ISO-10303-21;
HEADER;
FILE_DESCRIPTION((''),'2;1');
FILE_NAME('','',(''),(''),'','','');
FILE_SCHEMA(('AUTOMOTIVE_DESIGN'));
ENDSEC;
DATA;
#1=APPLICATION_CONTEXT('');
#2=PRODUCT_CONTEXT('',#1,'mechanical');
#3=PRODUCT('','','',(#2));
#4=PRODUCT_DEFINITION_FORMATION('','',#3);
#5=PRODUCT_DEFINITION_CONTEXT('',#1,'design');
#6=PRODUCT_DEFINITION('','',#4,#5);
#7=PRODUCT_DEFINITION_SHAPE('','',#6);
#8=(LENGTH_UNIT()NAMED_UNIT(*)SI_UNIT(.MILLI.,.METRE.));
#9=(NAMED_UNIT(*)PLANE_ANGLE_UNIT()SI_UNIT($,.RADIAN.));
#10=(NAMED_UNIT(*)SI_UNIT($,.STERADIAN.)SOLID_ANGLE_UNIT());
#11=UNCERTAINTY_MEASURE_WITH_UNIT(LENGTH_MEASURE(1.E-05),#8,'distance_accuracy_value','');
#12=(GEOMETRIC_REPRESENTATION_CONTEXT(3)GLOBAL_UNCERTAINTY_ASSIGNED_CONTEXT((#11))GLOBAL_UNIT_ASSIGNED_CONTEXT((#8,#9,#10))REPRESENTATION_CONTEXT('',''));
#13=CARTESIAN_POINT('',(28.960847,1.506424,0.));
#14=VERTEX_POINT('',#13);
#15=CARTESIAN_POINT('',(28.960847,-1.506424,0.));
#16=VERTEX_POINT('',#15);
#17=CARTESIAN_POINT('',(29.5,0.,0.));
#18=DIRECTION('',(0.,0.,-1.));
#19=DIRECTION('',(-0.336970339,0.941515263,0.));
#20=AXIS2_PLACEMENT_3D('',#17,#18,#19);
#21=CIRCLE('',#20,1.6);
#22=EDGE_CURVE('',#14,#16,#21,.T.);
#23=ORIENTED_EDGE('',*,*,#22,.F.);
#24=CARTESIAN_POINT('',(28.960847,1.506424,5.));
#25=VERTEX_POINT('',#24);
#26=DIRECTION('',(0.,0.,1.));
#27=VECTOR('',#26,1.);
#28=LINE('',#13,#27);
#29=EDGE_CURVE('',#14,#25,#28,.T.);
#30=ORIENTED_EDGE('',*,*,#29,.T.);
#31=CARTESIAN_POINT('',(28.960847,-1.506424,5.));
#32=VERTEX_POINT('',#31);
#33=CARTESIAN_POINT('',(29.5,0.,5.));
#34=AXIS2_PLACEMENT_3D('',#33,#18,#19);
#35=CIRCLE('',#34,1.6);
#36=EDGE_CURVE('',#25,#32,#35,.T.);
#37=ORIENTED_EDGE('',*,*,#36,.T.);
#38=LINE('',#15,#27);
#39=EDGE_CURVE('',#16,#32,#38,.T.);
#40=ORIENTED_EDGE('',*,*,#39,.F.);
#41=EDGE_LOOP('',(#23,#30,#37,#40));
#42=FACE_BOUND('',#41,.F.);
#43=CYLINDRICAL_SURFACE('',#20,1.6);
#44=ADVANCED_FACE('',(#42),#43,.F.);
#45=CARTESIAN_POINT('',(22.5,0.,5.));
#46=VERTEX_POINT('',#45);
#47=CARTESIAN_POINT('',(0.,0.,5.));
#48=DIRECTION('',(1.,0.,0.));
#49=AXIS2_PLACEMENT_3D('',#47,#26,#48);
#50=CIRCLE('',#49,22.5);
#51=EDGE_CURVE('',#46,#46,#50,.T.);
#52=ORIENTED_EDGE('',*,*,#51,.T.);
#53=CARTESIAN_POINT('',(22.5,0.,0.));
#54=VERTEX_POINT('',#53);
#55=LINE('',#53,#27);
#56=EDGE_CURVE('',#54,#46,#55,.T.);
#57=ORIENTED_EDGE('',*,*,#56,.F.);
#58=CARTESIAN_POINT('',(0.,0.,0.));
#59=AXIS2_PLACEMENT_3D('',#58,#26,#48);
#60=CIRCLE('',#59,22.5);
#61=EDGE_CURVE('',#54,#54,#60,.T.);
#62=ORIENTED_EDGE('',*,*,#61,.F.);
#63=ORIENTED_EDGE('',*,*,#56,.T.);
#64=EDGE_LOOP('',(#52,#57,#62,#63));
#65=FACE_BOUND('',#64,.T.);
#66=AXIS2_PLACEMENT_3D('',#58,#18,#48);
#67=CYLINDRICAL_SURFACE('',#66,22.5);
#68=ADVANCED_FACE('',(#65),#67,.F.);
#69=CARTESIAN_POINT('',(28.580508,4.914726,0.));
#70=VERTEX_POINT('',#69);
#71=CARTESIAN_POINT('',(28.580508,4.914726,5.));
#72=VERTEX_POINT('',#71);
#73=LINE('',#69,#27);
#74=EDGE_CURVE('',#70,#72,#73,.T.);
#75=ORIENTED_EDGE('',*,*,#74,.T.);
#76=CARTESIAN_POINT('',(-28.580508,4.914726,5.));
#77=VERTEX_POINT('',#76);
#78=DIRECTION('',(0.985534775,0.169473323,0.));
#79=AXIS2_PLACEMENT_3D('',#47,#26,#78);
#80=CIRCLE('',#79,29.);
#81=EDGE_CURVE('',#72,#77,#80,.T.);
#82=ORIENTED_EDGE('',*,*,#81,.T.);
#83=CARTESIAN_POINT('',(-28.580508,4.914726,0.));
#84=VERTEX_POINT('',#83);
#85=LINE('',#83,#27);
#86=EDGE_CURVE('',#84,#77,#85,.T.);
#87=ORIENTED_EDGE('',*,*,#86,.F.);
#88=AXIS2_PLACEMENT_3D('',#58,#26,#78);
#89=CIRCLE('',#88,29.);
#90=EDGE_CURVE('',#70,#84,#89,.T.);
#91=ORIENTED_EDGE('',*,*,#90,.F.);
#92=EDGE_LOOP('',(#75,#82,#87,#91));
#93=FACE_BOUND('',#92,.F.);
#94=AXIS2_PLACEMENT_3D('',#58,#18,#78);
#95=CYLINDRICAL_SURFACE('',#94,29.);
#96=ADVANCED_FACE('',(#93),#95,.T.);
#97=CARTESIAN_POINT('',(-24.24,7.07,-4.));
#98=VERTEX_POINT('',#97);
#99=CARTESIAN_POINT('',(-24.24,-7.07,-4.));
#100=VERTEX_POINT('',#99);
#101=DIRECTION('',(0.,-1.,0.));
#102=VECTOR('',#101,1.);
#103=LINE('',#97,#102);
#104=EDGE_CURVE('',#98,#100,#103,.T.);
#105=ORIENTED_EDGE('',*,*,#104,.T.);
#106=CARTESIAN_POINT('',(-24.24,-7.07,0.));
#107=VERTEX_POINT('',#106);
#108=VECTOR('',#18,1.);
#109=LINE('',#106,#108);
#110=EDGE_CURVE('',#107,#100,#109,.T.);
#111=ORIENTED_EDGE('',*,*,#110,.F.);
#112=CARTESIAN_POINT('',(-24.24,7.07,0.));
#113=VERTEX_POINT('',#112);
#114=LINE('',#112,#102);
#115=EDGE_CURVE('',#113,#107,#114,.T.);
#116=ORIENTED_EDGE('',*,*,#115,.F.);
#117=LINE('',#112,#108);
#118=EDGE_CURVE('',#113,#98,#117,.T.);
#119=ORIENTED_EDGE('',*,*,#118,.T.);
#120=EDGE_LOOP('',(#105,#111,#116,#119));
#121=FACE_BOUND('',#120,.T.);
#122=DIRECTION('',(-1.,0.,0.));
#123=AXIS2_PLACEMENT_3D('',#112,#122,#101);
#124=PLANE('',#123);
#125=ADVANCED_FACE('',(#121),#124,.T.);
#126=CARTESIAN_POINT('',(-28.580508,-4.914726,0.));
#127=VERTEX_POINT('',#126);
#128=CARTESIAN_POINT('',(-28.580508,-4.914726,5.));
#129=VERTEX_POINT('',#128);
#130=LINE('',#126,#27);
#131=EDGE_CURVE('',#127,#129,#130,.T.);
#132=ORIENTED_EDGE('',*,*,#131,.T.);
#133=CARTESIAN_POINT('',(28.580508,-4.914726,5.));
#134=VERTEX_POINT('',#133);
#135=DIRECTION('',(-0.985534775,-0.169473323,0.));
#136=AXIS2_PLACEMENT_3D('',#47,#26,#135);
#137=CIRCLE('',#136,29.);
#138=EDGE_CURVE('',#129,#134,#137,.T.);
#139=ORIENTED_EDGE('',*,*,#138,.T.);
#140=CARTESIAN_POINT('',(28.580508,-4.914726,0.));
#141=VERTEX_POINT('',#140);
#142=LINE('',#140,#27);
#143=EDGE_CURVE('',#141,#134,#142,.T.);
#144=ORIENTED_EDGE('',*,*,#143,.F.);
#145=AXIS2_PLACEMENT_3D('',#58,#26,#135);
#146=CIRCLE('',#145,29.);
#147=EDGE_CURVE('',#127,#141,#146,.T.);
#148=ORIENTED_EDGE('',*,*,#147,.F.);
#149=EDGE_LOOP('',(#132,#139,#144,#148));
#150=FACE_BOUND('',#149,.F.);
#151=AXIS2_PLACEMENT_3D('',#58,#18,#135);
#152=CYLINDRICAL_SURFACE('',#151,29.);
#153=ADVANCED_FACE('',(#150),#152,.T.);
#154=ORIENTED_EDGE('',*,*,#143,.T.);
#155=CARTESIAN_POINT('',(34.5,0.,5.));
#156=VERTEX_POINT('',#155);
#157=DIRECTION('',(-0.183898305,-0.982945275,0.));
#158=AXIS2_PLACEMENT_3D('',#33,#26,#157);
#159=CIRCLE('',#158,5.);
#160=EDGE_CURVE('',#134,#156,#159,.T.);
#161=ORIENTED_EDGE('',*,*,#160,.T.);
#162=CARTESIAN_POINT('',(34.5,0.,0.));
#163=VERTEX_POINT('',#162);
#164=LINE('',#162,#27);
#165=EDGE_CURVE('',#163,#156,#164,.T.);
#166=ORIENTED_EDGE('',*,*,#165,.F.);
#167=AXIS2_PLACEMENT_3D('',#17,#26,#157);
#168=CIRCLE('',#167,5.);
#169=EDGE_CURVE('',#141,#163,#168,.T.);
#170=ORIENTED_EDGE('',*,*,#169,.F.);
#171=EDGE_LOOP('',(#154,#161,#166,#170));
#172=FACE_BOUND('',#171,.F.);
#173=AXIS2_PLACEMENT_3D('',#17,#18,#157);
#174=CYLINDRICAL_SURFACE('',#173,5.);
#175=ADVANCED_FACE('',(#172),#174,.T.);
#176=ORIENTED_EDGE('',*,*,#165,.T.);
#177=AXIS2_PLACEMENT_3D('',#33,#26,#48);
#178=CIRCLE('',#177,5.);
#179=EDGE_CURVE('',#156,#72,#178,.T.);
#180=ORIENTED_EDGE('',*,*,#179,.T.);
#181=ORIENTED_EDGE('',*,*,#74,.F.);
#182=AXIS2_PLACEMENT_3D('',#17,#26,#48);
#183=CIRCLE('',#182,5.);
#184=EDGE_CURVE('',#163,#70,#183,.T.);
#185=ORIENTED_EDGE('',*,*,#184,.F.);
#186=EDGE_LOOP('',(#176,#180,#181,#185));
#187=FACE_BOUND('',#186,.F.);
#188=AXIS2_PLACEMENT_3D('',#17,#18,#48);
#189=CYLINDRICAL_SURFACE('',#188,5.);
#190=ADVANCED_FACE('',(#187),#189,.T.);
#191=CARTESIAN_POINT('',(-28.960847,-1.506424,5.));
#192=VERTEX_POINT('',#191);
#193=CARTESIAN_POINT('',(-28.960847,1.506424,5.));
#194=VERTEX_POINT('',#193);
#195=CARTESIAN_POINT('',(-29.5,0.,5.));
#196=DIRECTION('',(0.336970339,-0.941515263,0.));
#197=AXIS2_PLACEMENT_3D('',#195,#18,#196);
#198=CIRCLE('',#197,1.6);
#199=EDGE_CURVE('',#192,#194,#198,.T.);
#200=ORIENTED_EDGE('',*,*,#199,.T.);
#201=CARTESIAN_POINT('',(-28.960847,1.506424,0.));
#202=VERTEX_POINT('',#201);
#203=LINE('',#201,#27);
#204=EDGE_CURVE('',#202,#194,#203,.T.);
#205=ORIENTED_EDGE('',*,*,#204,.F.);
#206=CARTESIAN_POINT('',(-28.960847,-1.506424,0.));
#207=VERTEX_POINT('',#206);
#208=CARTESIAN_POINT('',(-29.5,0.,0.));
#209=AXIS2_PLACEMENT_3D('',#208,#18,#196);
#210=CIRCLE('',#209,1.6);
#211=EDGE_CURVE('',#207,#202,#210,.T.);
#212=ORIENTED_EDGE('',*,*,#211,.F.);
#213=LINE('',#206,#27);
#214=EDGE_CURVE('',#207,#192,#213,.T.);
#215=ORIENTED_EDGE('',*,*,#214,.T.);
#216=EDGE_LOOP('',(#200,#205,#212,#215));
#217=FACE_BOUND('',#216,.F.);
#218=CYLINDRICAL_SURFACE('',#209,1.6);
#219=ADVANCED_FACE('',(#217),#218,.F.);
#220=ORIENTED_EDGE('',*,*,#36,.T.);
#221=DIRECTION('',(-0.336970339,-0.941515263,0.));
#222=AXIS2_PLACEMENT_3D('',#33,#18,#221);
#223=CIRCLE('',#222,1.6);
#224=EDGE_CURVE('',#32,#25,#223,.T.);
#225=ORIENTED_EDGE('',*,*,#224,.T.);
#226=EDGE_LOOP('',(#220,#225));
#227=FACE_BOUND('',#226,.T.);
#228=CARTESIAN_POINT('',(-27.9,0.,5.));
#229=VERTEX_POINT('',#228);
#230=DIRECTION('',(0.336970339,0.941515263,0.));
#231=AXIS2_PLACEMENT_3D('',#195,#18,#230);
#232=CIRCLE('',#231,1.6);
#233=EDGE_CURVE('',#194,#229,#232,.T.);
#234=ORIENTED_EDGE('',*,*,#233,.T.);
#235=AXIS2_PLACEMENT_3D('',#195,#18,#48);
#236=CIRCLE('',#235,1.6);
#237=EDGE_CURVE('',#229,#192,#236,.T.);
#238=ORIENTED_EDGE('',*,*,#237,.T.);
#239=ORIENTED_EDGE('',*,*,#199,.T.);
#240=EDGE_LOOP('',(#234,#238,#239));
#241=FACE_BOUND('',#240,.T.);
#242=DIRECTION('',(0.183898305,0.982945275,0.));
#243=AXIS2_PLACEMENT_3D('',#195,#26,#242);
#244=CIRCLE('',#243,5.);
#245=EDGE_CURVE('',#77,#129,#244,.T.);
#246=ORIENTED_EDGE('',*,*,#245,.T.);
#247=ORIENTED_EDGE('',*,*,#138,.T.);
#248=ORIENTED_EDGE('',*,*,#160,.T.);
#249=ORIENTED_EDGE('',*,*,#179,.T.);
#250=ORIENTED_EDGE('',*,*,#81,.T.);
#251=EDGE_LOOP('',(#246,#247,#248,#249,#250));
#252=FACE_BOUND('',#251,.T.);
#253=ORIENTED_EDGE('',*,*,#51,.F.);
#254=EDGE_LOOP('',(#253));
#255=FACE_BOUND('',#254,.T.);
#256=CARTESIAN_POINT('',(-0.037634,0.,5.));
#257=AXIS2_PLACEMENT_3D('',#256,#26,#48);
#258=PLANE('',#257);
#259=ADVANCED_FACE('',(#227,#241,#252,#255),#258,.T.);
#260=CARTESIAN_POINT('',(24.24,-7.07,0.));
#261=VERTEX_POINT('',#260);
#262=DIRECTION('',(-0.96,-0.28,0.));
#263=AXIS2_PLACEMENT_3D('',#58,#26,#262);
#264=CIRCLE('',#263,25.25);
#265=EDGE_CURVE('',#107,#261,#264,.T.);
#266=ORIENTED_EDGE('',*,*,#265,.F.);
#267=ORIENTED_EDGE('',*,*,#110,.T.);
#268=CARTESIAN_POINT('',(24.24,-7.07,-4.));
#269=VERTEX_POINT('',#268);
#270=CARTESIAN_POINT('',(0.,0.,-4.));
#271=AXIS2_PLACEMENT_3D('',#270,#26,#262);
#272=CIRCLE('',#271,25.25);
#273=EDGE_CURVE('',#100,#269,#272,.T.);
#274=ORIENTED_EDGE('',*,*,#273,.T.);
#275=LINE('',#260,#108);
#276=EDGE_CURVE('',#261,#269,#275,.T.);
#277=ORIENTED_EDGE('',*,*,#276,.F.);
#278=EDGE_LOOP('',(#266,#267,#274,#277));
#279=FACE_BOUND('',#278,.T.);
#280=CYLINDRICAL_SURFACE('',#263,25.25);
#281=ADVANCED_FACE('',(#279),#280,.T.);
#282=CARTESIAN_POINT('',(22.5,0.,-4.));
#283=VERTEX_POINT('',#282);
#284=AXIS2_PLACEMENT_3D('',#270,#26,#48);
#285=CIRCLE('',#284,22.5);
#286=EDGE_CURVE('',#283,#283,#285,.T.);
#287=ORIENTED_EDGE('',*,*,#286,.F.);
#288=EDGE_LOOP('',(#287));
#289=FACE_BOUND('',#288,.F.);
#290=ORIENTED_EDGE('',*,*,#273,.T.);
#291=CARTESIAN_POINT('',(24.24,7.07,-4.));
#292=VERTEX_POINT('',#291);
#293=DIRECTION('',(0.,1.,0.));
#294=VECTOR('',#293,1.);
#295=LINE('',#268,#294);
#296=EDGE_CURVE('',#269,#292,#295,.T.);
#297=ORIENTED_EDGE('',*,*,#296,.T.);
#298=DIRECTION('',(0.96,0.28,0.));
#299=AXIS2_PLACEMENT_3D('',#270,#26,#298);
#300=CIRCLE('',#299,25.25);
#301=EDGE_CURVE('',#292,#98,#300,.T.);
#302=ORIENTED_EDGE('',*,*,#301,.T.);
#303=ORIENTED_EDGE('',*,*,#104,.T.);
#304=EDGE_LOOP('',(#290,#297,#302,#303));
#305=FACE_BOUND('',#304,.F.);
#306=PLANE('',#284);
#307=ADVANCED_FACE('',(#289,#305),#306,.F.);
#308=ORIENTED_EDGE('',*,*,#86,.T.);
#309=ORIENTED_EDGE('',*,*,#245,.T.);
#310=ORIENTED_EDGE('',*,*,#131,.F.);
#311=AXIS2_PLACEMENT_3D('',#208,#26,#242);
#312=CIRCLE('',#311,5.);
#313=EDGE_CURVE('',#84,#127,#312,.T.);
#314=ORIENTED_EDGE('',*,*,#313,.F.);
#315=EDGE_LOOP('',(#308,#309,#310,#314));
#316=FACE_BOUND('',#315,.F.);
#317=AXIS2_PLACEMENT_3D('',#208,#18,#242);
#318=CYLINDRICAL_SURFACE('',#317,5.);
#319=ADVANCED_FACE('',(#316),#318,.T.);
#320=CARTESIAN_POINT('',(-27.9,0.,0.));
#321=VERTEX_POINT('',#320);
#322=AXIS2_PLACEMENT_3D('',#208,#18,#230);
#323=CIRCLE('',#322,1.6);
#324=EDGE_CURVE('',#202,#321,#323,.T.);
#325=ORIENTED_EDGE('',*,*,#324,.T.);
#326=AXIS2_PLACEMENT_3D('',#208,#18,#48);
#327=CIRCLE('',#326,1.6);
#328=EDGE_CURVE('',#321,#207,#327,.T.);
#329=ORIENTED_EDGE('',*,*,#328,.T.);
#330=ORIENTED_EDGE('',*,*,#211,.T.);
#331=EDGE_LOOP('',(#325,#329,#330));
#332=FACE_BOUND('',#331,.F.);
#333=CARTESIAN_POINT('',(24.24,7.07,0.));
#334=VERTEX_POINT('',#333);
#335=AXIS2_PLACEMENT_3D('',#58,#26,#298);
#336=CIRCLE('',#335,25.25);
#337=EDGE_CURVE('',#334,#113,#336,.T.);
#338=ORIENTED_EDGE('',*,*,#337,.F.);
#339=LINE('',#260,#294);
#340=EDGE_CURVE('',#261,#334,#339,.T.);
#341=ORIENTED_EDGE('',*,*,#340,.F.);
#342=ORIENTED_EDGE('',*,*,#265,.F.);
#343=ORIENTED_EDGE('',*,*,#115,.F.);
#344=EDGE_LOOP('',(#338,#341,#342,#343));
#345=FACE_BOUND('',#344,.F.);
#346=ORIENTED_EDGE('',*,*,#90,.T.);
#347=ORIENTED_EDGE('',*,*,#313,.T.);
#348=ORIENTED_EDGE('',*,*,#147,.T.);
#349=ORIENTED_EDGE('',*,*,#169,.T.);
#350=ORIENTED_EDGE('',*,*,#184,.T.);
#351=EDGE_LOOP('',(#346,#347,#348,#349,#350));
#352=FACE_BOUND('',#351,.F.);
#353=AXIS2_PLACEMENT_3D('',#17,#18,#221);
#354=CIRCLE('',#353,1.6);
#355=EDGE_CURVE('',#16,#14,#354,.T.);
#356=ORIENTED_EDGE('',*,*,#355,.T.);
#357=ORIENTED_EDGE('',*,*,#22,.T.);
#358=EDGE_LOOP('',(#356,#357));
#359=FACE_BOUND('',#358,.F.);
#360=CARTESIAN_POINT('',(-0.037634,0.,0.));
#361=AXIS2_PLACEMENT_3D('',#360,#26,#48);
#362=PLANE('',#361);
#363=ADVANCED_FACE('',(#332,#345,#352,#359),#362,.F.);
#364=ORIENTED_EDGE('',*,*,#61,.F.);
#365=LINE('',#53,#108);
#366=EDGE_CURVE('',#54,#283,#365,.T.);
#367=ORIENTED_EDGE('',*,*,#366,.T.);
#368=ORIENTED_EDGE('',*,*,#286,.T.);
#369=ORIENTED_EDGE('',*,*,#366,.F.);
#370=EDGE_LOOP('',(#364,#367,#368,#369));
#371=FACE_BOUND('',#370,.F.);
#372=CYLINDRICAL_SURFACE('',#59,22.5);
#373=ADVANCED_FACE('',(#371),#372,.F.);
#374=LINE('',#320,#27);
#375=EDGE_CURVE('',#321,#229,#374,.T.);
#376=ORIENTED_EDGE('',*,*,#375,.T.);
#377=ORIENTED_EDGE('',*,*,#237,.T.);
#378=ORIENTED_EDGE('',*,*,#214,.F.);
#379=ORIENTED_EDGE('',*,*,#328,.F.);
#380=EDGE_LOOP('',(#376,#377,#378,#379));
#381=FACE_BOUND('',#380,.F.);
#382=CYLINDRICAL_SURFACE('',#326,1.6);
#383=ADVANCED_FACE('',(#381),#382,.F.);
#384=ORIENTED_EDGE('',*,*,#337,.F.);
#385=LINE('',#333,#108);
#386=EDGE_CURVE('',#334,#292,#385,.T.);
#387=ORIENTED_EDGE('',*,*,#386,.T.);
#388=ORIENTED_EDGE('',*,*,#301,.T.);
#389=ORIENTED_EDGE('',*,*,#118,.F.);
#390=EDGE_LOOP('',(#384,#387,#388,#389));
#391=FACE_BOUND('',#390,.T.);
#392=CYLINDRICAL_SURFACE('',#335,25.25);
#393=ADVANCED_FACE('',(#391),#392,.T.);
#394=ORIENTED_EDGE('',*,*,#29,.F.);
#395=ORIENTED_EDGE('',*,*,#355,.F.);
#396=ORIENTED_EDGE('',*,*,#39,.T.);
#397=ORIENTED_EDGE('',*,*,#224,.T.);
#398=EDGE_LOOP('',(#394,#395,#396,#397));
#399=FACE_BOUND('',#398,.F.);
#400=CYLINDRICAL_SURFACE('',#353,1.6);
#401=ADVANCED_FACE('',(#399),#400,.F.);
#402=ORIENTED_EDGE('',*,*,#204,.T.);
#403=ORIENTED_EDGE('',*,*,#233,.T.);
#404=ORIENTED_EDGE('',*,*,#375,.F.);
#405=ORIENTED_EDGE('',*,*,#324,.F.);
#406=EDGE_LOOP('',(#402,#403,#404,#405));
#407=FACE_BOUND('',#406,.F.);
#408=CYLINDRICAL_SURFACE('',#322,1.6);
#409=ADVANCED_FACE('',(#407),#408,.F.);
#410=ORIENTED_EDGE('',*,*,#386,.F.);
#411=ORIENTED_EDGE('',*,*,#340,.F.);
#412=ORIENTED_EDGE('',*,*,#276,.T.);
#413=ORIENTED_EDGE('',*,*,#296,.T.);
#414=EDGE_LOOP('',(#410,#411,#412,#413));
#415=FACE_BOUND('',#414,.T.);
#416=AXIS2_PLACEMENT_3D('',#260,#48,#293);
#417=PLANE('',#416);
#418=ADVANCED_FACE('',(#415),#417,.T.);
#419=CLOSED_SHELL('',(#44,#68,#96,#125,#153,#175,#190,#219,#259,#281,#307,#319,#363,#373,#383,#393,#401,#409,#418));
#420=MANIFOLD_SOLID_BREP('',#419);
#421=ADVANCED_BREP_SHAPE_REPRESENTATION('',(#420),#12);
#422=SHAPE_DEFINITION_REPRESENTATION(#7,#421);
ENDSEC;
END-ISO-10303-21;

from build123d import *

# Parameters (mm, degrees)
F0_R     = 22.5
F1_DEPTH = 5
F2_DEPTH = 4


# Not quite as in the source:
# - a feature names something its author has since deleted; it is built from what else it names


with BuildPart() as f1:
    # F0 (on Top) → F1 (new body)
    with BuildSketch(Plane.XY):
        with BuildLine():
            ThreePointArc((28.5805084746, -4.9147263743), (24.5, 0), (28.5805084746, 4.9147263743))
            ThreePointArc((28.5805084746, 4.9147263743), (0, 29), (-28.5805084746, 4.9147263743))
            ThreePointArc((-28.5805084746, 4.9147263743), (-25.6530884058, 3.1939428903), (-24.5, 0))
            ThreePointArc((-24.5, 0), (-25.6530884058, -3.1939428903), (-28.5805084746, -4.9147263743))
            ThreePointArc((-28.5805084746, -4.9147263743), (0, -29), (28.5805084746, -4.9147263743))
        make_face()
        with BuildLine():
            ThreePointArc((-24.24, 7.07), (0, 25.25), (24.24, 7.07))
            Line((24.24, 7.07), (24.24, -7.07))
            ThreePointArc((24.24, -7.07), (0, -25.25), (-24.24, -7.07))
            Line((-24.24, -7.07), (-24.24, 7.07))
        make_face(mode=Mode.SUBTRACT)
        with BuildLine():
            Line((24.24, -7.07), (24.24, 7.07))
            ThreePointArc((24.24, 7.07), (0, 25.25), (-24.24, 7.07))
            Line((-24.24, 7.07), (-24.24, -7.07))
            ThreePointArc((-24.24, -7.07), (0, -25.25), (24.24, -7.07))
        make_face()
        Circle(F0_R, mode=Mode.SUBTRACT)
        with BuildLine():
            ThreePointArc((-28.9608474576, 1.506424421), (-28.8211040937, 3.2162025464), (-28.5805084746, 4.9147263743))
            ThreePointArc((-28.5805084746, 4.9147263743), (-34.5, 0), (-28.5805084746, -4.9147263743))
            ThreePointArc((-28.5805084746, -4.9147263743), (-28.8211040937, -3.2162025464), (-28.9608474576, -1.506424421))
            ThreePointArc((-28.9608474576, -1.506424421), (-31.1, 0), (-28.9608474576, 1.506424421))
        make_face()
        with BuildLine():
            ThreePointArc((28.5805084746, 4.9147263743), (28.8211040937, 3.2162025464), (28.9608474576, 1.506424421))
            ThreePointArc((28.9608474576, 1.506424421), (30.4212371932, 1.3081750777), (31.1, 0))
            ThreePointArc((31.1, 0), (30.4212371932, -1.3081750777), (28.9608474576, -1.506424421))
            ThreePointArc((28.9608474576, -1.506424421), (28.8211040937, -3.2162025464), (28.5805084746, -4.9147263743))
            ThreePointArc((28.5805084746, -4.9147263743), (32.6939428903, -3.8469115942), (34.5, 0))
            ThreePointArc((34.5, 0), (32.6939428903, 3.8469115942), (28.5805084746, 4.9147263743))
        make_face()
        with BuildLine():
            ThreePointArc((-24.5, 0), (-25.6530884058, 3.1939428903), (-28.5805084746, 4.9147263743))
            ThreePointArc((-28.5805084746, 4.9147263743), (-28.8211040937, 3.2162025464), (-28.9608474576, 1.506424421))
            ThreePointArc((-28.9608474576, 1.506424421), (-28.1918249223, 0.9212371932), (-27.9, 0))
            ThreePointArc((-27.9, 0), (-28.1918249223, -0.9212371932), (-28.9608474576, -1.506424421))
            ThreePointArc((-28.9608474576, -1.506424421), (-28.8211040937, -3.2162025464), (-28.5805084746, -4.9147263743))
            ThreePointArc((-28.5805084746, -4.9147263743), (-25.6530884058, -3.1939428903), (-24.5, 0))
        make_face()
        with BuildLine():
            ThreePointArc((28.9608474576, -1.506424421), (27.9, 0), (28.9608474576, 1.506424421))
            ThreePointArc((28.9608474576, 1.506424421), (28.8211040937, 3.2162025464), (28.5805084746, 4.9147263743))
            ThreePointArc((28.5805084746, 4.9147263743), (24.5, 0), (28.5805084746, -4.9147263743))
            ThreePointArc((28.5805084746, -4.9147263743), (28.8211040937, -3.2162025464), (28.9608474576, -1.506424421))
        make_face()
    extrude(amount=F1_DEPTH)

    # F0 (on Top) → F2 (join)
    with BuildSketch(Plane.XY):
        with BuildLine():
            Line((24.24, -7.07), (24.24, 7.07))
            ThreePointArc((24.24, 7.07), (0, 25.25), (-24.24, 7.07))
            Line((-24.24, 7.07), (-24.24, -7.07))
            ThreePointArc((-24.24, -7.07), (0, -25.25), (24.24, -7.07))
        make_face()
        Circle(F0_R, mode=Mode.SUBTRACT)
    extrude(amount=-F2_DEPTH)


solid = f1.part
